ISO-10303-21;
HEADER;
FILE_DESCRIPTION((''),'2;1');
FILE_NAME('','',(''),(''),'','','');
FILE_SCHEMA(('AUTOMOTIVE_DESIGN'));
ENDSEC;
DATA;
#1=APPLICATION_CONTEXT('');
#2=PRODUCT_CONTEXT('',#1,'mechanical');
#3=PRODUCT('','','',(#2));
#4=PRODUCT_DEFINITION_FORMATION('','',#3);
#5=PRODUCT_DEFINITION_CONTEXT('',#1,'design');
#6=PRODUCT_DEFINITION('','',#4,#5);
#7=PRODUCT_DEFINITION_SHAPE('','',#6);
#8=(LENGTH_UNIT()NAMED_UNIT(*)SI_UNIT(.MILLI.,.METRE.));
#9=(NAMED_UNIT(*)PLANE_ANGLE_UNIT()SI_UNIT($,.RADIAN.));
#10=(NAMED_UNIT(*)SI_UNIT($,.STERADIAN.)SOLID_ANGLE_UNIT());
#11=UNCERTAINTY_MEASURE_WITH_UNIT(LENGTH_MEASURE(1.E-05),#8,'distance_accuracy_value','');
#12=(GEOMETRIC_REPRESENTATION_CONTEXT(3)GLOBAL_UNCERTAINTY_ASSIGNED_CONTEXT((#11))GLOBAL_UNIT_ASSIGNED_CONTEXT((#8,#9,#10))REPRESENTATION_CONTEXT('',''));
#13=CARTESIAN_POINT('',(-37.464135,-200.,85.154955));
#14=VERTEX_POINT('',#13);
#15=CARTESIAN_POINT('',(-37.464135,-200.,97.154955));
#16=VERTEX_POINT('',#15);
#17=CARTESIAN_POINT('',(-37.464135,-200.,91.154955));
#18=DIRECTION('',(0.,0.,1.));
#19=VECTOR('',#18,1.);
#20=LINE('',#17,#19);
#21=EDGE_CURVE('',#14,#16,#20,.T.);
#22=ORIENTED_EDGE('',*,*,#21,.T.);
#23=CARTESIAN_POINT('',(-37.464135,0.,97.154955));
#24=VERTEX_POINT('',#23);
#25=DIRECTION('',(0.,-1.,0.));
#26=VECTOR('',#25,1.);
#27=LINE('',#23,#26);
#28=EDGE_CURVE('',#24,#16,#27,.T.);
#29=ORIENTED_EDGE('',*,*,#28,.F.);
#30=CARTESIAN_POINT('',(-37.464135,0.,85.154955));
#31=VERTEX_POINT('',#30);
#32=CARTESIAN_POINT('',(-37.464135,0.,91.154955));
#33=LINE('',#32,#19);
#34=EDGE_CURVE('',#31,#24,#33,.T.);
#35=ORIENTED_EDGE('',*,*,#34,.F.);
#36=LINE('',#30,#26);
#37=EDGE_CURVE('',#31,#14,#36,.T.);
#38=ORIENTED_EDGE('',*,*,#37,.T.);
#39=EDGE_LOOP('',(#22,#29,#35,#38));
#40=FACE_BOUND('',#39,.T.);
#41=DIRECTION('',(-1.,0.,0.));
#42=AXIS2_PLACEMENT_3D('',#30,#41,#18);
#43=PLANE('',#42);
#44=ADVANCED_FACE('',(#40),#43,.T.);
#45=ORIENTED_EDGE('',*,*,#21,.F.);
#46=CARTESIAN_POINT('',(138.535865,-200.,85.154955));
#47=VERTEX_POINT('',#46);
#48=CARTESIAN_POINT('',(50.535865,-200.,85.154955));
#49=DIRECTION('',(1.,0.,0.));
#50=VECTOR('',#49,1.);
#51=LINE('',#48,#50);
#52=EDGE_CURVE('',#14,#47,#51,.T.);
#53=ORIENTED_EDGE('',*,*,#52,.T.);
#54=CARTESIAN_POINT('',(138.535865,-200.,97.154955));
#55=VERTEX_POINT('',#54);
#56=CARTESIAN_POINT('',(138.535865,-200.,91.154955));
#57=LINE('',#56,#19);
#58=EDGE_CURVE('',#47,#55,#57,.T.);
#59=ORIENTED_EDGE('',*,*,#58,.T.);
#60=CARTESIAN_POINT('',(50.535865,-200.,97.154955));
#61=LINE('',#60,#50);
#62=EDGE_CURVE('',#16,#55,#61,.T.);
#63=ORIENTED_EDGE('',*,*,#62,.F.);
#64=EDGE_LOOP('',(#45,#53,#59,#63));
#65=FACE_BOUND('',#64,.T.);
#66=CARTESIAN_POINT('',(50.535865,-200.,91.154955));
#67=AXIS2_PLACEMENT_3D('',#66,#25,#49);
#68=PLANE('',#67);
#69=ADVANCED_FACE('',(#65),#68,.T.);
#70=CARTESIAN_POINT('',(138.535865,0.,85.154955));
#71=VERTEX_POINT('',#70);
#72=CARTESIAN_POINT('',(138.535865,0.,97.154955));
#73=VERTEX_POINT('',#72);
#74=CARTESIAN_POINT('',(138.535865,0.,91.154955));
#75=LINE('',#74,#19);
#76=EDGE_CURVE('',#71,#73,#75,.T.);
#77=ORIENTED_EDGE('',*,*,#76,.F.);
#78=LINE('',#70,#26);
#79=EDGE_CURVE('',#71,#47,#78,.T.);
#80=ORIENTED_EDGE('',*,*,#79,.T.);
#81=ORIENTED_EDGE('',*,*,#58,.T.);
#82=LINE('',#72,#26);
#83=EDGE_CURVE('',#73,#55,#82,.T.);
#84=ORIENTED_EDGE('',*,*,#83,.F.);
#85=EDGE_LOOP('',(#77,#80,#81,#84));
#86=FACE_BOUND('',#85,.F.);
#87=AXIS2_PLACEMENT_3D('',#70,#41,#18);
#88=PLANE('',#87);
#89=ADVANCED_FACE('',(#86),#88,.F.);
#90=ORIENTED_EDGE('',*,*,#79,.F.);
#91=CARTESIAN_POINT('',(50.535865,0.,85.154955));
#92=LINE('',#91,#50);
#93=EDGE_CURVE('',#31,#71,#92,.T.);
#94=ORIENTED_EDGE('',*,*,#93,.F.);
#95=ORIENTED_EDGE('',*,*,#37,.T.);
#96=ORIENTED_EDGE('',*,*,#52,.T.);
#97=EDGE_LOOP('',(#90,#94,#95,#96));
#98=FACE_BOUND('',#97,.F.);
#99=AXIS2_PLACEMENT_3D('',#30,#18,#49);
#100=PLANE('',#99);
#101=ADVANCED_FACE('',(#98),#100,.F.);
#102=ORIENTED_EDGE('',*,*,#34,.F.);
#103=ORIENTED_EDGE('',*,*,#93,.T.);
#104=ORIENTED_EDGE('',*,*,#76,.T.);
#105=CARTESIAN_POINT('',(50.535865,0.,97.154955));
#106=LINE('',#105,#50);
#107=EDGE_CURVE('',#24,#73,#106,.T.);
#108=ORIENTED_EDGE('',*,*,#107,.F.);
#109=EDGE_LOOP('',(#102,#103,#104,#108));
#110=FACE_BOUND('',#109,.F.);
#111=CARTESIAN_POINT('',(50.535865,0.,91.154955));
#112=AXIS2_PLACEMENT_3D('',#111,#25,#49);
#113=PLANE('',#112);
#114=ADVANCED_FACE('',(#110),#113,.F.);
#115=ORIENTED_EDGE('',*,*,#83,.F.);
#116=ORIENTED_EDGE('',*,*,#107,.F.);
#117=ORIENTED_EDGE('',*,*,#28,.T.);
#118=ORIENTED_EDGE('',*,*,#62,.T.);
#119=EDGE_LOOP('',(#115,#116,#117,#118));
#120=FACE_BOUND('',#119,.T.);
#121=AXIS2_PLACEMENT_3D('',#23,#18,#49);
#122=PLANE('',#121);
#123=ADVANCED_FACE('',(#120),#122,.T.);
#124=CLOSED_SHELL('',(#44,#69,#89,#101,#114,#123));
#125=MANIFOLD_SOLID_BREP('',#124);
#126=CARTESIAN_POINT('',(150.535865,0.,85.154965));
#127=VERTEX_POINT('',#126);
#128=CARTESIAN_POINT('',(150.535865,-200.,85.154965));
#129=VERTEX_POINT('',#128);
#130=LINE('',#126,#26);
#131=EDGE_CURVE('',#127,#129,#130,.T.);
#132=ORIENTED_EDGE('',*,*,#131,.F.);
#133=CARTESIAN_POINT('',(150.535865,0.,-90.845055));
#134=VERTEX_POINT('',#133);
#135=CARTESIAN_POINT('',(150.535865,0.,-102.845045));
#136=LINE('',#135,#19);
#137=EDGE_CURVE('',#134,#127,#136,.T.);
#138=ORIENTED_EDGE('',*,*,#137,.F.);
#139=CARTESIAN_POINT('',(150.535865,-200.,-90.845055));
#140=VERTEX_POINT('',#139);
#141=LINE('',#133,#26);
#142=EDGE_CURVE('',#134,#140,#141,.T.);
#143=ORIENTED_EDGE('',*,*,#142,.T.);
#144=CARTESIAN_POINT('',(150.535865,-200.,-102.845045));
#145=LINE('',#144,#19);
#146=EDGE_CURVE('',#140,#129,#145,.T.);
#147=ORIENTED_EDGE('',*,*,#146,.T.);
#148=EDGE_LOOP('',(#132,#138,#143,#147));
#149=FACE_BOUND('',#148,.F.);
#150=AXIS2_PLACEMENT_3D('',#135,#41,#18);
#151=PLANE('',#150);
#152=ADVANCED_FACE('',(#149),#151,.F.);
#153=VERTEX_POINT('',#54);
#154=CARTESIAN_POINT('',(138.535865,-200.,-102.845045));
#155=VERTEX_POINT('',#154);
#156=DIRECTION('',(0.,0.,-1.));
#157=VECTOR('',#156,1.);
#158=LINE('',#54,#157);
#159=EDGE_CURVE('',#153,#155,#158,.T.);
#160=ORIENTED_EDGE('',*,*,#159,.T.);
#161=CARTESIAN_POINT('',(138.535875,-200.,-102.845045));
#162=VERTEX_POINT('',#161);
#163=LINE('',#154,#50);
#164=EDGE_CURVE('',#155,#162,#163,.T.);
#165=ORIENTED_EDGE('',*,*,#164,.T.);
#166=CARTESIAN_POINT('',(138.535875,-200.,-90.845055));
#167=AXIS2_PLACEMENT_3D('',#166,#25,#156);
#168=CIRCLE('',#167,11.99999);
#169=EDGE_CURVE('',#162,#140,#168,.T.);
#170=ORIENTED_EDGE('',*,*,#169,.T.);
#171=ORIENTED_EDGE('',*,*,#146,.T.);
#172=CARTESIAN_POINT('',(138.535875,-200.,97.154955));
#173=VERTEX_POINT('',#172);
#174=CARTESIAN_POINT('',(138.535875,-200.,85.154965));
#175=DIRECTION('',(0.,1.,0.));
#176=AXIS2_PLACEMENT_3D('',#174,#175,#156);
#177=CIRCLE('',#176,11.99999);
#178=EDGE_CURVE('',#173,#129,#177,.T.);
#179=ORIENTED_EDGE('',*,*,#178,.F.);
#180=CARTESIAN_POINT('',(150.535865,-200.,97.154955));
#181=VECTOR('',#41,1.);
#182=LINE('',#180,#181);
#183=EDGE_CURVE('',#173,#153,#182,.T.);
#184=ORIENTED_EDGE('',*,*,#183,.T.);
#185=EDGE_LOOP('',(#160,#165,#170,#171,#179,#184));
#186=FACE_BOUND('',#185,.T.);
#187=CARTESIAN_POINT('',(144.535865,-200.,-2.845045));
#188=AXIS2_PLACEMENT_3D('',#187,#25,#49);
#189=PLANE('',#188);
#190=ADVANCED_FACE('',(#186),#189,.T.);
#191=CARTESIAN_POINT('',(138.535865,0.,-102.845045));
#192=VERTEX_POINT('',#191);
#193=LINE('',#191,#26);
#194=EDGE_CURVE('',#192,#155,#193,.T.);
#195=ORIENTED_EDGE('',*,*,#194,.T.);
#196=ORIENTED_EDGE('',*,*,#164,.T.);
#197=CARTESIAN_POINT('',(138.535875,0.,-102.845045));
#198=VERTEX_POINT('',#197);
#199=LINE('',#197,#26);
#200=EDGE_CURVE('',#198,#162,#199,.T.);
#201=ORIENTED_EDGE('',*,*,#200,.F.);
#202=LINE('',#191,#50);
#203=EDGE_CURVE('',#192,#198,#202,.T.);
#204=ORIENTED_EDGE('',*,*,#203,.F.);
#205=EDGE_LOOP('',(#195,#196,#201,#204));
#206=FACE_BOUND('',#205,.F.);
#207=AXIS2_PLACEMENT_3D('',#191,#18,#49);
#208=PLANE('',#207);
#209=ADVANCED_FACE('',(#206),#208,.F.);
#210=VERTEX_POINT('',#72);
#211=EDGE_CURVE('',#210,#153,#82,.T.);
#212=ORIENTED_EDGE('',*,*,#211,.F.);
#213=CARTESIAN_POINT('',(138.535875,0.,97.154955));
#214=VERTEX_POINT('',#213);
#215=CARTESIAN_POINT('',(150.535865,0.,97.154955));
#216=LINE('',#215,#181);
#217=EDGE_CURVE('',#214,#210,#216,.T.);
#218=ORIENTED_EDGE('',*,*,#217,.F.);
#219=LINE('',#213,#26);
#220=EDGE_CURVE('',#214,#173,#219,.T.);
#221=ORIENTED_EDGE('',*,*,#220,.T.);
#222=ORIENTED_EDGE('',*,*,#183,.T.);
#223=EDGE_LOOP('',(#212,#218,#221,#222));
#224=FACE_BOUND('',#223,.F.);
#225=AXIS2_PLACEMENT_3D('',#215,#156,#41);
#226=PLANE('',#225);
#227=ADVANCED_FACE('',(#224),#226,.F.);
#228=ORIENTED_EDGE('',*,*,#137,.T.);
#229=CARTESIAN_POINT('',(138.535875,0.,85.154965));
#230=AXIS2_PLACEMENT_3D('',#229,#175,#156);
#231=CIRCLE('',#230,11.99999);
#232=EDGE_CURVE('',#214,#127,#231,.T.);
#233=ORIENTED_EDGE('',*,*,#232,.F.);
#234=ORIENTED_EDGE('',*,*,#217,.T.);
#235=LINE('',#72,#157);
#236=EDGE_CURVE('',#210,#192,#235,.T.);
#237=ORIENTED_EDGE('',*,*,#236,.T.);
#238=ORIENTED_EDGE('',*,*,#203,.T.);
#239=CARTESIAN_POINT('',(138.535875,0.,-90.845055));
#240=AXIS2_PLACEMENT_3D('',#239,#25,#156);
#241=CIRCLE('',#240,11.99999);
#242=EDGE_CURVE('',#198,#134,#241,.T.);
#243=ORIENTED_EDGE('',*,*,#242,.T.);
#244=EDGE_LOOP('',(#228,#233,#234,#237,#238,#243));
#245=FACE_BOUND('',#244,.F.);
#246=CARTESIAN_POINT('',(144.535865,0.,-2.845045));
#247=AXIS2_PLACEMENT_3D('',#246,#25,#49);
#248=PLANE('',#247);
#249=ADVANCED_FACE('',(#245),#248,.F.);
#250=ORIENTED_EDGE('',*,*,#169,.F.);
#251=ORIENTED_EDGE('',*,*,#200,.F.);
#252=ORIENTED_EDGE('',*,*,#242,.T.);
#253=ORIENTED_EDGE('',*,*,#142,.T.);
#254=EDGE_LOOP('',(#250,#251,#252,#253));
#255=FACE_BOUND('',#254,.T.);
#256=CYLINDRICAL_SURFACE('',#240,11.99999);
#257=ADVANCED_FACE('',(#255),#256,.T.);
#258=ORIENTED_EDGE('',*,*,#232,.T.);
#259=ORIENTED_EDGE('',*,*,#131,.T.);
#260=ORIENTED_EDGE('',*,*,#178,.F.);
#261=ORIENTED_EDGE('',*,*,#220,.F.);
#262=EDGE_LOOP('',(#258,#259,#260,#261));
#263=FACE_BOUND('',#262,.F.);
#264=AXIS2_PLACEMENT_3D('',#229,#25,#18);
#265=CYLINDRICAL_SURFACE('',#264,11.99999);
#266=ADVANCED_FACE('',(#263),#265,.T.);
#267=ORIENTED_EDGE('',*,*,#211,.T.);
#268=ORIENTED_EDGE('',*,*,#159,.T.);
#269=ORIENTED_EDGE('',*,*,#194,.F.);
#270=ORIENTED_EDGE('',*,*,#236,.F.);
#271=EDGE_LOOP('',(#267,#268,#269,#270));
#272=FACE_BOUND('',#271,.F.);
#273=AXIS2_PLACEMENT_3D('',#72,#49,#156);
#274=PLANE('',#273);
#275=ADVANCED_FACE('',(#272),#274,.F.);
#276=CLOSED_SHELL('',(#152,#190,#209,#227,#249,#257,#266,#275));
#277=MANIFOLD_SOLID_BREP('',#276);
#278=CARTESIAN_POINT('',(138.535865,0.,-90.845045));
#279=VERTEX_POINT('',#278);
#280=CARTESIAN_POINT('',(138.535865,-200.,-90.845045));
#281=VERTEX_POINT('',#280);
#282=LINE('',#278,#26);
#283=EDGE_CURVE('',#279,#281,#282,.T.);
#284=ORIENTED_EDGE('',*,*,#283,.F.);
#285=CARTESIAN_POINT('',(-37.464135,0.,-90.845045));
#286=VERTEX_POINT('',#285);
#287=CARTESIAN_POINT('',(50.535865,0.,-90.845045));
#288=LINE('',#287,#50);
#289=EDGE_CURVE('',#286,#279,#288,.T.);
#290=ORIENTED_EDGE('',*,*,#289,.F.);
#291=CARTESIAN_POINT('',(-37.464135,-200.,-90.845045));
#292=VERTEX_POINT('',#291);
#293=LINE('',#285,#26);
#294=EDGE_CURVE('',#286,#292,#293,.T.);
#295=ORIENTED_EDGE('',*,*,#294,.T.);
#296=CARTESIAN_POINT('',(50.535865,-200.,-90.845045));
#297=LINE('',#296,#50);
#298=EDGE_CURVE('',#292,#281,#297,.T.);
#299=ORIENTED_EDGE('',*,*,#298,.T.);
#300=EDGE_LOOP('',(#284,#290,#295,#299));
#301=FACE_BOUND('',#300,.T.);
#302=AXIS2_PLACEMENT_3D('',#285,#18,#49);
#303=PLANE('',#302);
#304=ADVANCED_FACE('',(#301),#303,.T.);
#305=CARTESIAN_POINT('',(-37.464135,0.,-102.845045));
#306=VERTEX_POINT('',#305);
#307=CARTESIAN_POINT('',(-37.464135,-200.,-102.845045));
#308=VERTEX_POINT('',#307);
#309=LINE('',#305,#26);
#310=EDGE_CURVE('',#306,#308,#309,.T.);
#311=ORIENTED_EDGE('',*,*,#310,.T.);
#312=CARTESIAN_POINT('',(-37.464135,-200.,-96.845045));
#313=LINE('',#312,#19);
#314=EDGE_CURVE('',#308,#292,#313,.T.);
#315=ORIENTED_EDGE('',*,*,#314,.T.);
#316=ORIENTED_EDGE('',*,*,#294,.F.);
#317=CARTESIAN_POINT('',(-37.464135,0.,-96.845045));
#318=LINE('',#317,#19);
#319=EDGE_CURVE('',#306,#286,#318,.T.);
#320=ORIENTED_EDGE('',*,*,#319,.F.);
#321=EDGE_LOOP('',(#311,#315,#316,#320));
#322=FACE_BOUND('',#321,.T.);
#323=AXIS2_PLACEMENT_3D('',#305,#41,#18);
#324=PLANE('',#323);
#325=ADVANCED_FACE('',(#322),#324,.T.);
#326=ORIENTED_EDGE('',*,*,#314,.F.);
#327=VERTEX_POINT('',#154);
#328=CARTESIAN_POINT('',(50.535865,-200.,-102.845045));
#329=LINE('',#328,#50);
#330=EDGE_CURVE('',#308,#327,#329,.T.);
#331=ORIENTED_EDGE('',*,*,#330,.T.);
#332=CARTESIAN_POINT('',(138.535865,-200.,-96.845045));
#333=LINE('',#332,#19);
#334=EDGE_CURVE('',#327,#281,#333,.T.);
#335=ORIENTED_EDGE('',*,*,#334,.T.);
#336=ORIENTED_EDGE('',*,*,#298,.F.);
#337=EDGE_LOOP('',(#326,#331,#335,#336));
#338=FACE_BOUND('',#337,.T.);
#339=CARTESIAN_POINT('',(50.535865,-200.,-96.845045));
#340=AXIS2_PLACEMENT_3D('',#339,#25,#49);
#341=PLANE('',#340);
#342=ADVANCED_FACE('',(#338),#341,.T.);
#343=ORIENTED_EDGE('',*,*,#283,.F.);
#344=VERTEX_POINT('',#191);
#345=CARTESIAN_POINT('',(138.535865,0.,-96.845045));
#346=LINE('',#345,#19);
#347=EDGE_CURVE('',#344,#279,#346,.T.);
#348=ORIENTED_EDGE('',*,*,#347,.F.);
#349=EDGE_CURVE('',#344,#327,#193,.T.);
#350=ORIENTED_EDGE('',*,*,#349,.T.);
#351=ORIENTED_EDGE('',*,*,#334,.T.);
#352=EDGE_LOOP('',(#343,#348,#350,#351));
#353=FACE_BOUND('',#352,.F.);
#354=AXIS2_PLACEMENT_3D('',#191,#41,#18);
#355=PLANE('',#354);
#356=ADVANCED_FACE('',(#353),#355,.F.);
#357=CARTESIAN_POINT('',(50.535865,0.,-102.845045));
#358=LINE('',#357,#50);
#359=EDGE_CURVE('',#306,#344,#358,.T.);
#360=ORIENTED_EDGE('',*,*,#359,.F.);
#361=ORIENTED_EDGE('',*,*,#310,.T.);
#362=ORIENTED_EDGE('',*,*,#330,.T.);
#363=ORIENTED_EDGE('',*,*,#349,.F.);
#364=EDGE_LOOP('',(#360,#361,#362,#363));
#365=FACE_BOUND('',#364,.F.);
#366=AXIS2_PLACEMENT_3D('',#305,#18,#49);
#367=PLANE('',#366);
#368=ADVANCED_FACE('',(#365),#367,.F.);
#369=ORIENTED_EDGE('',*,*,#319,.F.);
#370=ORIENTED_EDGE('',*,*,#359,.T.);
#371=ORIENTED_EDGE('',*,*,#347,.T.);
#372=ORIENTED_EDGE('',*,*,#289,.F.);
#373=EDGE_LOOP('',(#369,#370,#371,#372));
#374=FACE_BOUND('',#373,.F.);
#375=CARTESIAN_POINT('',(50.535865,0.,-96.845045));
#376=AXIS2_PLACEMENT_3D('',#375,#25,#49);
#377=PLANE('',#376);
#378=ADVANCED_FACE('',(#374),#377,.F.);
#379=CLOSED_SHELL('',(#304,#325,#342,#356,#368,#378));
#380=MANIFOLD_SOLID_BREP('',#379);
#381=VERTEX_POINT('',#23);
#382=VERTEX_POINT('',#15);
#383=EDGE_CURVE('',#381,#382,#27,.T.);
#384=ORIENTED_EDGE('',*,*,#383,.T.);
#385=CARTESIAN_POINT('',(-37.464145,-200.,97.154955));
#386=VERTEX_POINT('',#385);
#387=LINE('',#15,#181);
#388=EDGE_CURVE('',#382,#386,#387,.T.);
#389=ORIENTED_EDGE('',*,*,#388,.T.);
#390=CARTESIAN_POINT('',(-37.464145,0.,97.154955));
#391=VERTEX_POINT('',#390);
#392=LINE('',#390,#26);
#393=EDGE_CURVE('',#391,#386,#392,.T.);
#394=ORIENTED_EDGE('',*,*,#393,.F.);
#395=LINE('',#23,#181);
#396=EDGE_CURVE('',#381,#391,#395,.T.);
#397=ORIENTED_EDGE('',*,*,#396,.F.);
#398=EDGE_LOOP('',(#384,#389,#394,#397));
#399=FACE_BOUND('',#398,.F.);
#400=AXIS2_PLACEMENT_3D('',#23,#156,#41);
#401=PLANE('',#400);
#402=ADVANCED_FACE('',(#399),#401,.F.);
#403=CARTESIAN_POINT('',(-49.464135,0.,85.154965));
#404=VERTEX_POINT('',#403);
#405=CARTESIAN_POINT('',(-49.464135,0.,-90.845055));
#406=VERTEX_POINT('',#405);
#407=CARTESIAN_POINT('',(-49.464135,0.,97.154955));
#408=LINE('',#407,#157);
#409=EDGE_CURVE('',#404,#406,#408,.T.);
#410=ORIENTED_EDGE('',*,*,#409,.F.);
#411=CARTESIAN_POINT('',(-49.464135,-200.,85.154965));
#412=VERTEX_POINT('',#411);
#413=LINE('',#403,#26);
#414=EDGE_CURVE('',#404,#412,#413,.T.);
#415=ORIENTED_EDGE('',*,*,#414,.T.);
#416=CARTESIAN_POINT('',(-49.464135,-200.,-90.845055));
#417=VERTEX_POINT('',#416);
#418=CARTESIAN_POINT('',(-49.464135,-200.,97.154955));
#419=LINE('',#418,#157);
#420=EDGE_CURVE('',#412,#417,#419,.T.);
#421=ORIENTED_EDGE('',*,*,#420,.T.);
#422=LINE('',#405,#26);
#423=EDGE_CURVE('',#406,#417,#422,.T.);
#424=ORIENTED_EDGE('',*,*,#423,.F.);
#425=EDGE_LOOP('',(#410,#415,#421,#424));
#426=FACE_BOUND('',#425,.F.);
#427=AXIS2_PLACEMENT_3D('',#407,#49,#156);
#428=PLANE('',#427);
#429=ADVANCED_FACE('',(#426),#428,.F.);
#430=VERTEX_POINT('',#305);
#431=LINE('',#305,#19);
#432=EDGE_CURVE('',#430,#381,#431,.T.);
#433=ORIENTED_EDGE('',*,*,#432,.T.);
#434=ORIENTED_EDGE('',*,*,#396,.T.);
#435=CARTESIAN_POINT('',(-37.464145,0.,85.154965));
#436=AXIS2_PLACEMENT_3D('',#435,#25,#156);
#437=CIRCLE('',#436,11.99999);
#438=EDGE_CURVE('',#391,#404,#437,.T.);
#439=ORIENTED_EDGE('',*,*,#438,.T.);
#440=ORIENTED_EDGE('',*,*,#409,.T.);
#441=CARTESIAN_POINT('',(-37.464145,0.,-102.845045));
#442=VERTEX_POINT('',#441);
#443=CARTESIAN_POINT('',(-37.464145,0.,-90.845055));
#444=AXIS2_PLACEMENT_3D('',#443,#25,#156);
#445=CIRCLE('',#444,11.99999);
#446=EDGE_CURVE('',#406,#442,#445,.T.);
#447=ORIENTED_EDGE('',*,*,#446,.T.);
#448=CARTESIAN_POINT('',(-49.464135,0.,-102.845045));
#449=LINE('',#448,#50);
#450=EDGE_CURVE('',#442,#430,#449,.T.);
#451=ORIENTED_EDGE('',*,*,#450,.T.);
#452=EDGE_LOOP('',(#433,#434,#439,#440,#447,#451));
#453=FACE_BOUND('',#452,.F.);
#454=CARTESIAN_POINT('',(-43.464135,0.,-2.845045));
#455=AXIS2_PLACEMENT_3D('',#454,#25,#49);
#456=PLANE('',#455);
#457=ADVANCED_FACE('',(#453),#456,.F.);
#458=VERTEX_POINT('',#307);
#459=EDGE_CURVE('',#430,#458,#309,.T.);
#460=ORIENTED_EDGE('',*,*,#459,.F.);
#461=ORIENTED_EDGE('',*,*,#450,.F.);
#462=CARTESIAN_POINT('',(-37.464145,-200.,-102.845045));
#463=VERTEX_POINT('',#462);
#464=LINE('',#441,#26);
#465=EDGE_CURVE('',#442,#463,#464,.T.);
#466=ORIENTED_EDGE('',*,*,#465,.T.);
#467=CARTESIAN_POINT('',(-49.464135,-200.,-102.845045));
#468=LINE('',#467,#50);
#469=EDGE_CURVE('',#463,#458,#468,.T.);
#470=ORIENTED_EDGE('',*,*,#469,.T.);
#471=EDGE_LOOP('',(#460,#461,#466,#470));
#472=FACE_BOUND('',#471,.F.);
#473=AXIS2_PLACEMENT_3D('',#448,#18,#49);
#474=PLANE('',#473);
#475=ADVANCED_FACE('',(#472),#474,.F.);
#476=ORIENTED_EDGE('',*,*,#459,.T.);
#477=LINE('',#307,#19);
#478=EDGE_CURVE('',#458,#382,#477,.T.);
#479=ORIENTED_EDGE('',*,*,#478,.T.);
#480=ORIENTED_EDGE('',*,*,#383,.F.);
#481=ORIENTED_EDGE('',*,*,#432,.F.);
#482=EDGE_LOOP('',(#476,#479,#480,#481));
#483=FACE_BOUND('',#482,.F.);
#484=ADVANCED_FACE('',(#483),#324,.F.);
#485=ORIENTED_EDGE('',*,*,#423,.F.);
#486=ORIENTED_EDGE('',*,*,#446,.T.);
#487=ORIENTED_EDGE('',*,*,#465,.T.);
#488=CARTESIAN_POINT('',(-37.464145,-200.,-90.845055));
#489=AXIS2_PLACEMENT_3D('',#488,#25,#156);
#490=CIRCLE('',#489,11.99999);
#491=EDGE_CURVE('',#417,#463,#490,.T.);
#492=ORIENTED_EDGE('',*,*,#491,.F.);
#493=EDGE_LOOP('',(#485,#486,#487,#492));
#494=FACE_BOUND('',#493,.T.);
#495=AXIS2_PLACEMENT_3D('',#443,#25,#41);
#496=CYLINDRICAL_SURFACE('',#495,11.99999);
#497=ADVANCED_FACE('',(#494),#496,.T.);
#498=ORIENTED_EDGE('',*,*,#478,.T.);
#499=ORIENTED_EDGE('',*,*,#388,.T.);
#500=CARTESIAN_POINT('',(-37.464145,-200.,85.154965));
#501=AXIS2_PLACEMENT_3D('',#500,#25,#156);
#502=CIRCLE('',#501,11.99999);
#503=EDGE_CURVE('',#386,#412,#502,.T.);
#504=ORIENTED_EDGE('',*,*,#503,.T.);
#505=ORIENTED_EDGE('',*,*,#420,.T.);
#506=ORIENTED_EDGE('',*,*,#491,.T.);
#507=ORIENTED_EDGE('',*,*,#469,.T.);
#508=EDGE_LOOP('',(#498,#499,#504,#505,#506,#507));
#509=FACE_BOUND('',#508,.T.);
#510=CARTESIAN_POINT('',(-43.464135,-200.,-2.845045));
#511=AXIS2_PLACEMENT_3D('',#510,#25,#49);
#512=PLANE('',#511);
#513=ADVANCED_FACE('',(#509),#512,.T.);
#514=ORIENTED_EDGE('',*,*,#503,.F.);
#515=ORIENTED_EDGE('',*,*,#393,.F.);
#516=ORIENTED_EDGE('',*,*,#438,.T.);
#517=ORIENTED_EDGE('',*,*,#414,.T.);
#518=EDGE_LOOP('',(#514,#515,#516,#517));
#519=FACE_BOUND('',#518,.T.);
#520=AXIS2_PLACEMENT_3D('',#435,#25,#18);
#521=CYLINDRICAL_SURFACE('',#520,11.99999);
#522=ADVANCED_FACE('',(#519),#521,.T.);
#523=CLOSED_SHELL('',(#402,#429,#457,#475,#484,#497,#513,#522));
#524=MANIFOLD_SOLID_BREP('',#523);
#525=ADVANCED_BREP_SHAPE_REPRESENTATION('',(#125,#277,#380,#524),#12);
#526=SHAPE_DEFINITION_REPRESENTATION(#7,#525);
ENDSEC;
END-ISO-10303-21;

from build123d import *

# Parameters (mm, degrees)
F2_DEPTH = 200
F1_W     = 176
F1_H     = 12
F3_DEPTH = 200
F4_R     = 11.99999
F4_2_R   = 11.99999


# Not quite as in the source:
# - a fillet or chamfer is up to 0.001 mm smaller than in the source, because OpenCascade refuses the exact size


with BuildPart() as f2:
    # F1 (on Front) → F2 (new body)
    with BuildSketch(Plane.XZ):
        Polygon((-37.4641348869, 97.1549547033), (-49.4641348869, 97.1549547033), (-49.4641348869, -102.8450452967), (-37.4641348869, -102.8450452967), (-37.4641348869, -90.8450452967), (-37.4641348869, 85.1549547033), align=None)
    extrude(amount=F2_DEPTH)

    # F4#2 (radius 12 in the source; OpenCascade refuses exactly that, so slightly less here)
    f4_2_edges = [f2.edges().sort_by_distance(p)[0] for p in [
        (-49.464135, -100, -102.845045),
        (-49.464135, -100, 97.154955),
    ]]
    fillet(f4_2_edges, radius=F4_2_R)


with BuildPart() as f2b:
    # F1 (on Front) → F2, piece 2 (new body)
    with BuildSketch(Plane.XZ):
        Polygon((150.5358651131, 97.1549547033), (138.5358651131, 97.1549547033), (138.5358651131, 85.1549547033), (138.5358651131, -90.8450452967), (138.5358651131, -102.8450452967), (150.5358651131, -102.8450452967), align=None)
    extrude(amount=F2_DEPTH)

    # F4 (radius 12 in the source; OpenCascade refuses exactly that, so slightly less here)
    f4_edges = [f2b.edges().sort_by_distance(p)[0] for p in [
        (150.535865, -100, -102.845045),
        (150.535865, -100, 97.154955),
    ]]
    fillet(f4_edges, radius=F4_R)


with BuildPart() as f3:
    # F1 (on Front) → F3 (new body)
    with BuildSketch(Plane.XZ):
        with Locations((50.5358651131, 91.1549547033)):
            Rectangle(F1_W, F1_H)
    extrude(amount=F3_DEPTH)


with BuildPart() as f3b:
    # F1 (on Front) → F3, piece 2 (new body)
    with BuildSketch(Plane.XZ):
        with Locations((50.5358651131, -96.8450452967)):
            Rectangle(F1_W, F1_H)
    extrude(amount=F3_DEPTH)


solid = Compound([f2.part, f2b.part, f3.part, f3b.part])
